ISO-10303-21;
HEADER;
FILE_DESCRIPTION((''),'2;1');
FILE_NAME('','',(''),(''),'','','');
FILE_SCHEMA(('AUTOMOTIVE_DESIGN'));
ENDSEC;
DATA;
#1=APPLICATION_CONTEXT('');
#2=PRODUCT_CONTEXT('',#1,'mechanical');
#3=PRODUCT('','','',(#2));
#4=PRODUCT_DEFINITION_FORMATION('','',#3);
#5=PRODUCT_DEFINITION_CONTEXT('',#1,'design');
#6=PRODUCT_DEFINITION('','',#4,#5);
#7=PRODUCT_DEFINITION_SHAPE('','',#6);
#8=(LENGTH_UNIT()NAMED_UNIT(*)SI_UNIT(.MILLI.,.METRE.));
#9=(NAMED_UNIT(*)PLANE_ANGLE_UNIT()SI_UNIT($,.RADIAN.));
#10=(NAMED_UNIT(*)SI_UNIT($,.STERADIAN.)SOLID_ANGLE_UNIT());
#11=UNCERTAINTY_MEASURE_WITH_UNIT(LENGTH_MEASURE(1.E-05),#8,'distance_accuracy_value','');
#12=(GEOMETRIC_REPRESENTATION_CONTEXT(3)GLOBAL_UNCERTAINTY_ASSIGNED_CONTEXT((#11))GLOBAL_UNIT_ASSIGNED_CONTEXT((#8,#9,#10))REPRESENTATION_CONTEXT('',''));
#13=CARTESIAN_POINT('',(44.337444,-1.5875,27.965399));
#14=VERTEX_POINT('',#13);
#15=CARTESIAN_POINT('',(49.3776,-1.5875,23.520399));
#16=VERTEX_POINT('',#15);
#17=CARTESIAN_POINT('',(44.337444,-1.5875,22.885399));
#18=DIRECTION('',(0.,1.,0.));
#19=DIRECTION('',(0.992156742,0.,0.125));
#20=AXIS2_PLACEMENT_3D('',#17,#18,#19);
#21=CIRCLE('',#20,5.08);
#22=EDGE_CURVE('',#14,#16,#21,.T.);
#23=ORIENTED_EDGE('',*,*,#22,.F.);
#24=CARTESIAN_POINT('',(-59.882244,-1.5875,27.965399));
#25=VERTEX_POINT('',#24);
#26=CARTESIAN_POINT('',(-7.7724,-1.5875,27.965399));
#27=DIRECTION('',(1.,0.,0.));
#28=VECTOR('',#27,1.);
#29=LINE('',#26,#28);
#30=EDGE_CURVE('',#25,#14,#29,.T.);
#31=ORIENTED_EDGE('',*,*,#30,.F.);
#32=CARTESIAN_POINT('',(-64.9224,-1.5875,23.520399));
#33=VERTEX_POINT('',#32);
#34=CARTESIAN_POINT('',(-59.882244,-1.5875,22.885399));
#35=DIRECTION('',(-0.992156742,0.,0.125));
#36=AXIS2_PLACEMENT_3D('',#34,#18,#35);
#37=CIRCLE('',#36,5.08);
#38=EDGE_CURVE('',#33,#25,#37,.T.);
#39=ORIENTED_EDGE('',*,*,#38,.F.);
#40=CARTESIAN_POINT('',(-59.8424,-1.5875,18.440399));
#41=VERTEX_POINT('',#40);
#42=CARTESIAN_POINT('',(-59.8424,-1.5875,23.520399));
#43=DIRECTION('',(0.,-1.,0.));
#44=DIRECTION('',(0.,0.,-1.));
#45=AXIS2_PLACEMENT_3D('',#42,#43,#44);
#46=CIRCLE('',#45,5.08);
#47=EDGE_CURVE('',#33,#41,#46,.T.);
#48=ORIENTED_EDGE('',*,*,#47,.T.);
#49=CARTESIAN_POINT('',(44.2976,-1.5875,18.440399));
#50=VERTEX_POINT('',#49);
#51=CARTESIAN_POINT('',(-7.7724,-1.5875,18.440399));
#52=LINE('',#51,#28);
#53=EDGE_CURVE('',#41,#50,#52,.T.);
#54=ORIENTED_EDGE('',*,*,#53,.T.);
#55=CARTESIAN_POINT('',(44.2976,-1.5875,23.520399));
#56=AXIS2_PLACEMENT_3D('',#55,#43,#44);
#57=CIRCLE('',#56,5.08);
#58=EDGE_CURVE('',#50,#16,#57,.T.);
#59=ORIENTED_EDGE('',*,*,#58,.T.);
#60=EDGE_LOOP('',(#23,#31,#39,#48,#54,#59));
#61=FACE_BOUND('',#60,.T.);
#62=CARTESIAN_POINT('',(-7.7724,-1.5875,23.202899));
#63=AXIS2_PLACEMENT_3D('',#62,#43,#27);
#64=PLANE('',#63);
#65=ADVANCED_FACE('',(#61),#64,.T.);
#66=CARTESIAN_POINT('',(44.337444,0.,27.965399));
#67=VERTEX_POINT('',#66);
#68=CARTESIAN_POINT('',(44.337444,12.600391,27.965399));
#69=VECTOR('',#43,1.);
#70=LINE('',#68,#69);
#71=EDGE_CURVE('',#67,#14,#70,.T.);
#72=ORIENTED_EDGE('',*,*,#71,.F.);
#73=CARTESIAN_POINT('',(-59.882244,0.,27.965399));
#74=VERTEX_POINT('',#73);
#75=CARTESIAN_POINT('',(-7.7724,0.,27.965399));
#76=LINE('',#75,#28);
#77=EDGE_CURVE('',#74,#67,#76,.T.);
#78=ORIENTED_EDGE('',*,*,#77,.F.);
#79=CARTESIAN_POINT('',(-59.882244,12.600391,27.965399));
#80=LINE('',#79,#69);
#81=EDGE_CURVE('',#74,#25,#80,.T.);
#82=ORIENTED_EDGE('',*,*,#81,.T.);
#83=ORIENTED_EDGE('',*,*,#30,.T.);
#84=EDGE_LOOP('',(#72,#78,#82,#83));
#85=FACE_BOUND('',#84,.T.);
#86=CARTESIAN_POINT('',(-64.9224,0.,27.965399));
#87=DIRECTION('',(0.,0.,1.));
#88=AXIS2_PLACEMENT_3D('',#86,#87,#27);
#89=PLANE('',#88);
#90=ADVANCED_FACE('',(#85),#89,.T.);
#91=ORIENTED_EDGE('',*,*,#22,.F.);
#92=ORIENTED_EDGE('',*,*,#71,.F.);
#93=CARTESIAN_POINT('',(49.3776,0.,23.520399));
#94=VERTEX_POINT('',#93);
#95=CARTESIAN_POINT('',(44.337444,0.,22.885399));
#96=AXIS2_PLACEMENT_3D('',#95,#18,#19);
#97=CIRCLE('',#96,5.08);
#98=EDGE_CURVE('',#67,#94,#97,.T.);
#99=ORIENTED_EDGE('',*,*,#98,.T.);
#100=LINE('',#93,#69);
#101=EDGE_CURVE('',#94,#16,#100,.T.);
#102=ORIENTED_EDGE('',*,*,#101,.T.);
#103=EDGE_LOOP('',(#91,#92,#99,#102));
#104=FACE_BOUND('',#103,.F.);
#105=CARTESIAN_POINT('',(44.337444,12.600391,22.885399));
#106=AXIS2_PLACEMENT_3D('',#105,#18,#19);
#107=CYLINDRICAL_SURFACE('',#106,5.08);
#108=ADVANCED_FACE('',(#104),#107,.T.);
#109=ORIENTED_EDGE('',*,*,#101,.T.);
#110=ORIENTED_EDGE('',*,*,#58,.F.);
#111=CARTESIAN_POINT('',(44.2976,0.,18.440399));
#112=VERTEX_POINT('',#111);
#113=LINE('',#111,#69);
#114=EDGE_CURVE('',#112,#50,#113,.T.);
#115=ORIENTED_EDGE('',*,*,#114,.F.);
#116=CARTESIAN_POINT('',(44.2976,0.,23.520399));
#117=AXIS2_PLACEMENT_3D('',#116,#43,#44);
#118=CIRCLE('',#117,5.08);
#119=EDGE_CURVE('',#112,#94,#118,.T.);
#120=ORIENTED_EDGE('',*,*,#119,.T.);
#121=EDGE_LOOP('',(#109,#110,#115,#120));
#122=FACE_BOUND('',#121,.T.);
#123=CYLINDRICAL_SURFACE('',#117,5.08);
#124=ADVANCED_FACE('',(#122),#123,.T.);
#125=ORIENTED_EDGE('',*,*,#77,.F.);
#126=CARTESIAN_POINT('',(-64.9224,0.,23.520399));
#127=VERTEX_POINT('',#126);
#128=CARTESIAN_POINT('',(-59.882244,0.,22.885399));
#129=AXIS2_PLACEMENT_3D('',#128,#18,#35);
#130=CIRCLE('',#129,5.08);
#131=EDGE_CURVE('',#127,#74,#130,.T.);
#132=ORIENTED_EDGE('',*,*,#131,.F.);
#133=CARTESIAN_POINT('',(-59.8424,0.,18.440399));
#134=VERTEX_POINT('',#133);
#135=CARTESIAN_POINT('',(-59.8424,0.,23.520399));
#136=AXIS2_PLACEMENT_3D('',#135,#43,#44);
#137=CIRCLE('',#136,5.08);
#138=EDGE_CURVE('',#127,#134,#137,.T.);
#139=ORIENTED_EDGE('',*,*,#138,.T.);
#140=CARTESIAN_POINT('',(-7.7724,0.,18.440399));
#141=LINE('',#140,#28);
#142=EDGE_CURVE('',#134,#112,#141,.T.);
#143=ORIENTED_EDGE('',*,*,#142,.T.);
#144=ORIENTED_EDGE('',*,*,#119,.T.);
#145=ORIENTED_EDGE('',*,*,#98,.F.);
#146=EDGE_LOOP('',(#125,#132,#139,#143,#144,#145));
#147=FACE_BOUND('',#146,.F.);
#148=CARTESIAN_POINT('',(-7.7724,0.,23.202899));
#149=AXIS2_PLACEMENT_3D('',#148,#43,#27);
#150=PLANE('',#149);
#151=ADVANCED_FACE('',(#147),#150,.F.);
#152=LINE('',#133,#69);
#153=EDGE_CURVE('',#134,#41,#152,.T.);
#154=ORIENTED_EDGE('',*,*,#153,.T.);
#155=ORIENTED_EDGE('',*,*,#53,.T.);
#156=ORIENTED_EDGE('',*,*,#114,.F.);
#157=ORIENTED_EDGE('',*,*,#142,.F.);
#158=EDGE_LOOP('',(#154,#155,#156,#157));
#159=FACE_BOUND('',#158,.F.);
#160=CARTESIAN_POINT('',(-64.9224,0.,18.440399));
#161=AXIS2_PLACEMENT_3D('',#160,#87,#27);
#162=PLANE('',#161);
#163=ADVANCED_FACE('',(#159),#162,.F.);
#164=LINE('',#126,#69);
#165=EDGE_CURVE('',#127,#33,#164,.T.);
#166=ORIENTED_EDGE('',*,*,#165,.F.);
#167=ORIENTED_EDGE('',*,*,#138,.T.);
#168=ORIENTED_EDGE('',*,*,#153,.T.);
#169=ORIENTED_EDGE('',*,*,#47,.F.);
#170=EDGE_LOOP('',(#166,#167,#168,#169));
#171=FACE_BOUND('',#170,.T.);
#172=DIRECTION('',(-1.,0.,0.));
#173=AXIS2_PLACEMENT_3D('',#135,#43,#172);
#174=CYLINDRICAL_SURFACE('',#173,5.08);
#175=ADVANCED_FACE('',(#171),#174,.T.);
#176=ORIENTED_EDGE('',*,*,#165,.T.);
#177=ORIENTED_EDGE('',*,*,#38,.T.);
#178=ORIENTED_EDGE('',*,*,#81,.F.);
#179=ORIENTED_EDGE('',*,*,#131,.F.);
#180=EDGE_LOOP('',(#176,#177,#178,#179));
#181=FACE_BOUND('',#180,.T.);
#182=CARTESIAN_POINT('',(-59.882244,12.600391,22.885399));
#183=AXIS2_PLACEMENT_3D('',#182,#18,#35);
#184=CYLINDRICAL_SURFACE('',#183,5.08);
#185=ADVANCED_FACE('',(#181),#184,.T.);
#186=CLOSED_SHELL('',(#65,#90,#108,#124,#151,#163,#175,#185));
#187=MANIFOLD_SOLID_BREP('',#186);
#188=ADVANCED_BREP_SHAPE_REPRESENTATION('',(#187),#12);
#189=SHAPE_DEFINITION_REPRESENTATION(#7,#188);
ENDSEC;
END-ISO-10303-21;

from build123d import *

# Parameters (mm, degrees)
F0_W        = 114.3
F0_H        = 9.525
F1_DEPTH    = 1.5875
F2_R        = 5.08
F3_T1_DEPTH = 26.7882812379
F4_R        = 5.08
F5_T1_DEPTH = 26.7882812379


# Not quite as in the source:
# - a fillet or chamfer that OpenCascade refuses, or shapes differently, is made with other operations: its cross-section is extruded or revolved along the edge and cut away or added


with BuildPart() as f1:
    # F0 (on Front) → F1 (new body)
    with BuildSketch(Plane.XZ):
        with Locations((-7.7723998189, 23.2028993189)):
            Rectangle(F0_W, F0_H)
    extrude(amount=F1_DEPTH)

    # F2
    f2_edges = [f1.edges().sort_by_distance(p)[0] for p in [
        (-64.9224, -0.79375, 18.440399),
    ]]
    fillet(f2_edges, radius=F2_R)

    # F3: fillet of radius 5.08 on 1 edges, made by hand

    # F3_s2 → F3_t1 (cut)
    with BuildSketch(Plane.XZ.offset(-12.6003906189)):
        with BuildLine():
            ThreePointArc((-64.9223998189, 23.5203993189), (-63.2423477364, 26.6953993189), (-59.8822435713, 27.9653993189))
            Line((-59.8822435713, 27.9653993189), (-64.9223998189, 27.9653993189))
            Line((-64.9223998189, 27.9653993189), (-64.9223998189, 23.5203993189))
        make_face()
    extrude(amount=F3_T1_DEPTH, mode=Mode.SUBTRACT)

    # F4
    f4_edges = [f1.edges().sort_by_distance(p)[0] for p in [
        (49.3776, -0.79375, 18.440399),
    ]]
    fillet(f4_edges, radius=F4_R)

    # F5: fillet of radius 5.08 on 1 edges, made by hand

    # F5_s2 → F5_t1 (cut)
    with BuildSketch(Plane.XZ.offset(-12.6003906189)):
        with BuildLine():
            ThreePointArc((49.3776001811, 23.5203993189), (47.6975480986, 26.6953993189), (44.3374439335, 27.9653993189))
            Line((44.3374439335, 27.9653993189), (49.3776001811, 27.9653993189))
            Line((49.3776001811, 27.9653993189), (49.3776001811, 23.5203993189))
        make_face()
    extrude(amount=F5_T1_DEPTH, mode=Mode.SUBTRACT)


solid = f1.part
